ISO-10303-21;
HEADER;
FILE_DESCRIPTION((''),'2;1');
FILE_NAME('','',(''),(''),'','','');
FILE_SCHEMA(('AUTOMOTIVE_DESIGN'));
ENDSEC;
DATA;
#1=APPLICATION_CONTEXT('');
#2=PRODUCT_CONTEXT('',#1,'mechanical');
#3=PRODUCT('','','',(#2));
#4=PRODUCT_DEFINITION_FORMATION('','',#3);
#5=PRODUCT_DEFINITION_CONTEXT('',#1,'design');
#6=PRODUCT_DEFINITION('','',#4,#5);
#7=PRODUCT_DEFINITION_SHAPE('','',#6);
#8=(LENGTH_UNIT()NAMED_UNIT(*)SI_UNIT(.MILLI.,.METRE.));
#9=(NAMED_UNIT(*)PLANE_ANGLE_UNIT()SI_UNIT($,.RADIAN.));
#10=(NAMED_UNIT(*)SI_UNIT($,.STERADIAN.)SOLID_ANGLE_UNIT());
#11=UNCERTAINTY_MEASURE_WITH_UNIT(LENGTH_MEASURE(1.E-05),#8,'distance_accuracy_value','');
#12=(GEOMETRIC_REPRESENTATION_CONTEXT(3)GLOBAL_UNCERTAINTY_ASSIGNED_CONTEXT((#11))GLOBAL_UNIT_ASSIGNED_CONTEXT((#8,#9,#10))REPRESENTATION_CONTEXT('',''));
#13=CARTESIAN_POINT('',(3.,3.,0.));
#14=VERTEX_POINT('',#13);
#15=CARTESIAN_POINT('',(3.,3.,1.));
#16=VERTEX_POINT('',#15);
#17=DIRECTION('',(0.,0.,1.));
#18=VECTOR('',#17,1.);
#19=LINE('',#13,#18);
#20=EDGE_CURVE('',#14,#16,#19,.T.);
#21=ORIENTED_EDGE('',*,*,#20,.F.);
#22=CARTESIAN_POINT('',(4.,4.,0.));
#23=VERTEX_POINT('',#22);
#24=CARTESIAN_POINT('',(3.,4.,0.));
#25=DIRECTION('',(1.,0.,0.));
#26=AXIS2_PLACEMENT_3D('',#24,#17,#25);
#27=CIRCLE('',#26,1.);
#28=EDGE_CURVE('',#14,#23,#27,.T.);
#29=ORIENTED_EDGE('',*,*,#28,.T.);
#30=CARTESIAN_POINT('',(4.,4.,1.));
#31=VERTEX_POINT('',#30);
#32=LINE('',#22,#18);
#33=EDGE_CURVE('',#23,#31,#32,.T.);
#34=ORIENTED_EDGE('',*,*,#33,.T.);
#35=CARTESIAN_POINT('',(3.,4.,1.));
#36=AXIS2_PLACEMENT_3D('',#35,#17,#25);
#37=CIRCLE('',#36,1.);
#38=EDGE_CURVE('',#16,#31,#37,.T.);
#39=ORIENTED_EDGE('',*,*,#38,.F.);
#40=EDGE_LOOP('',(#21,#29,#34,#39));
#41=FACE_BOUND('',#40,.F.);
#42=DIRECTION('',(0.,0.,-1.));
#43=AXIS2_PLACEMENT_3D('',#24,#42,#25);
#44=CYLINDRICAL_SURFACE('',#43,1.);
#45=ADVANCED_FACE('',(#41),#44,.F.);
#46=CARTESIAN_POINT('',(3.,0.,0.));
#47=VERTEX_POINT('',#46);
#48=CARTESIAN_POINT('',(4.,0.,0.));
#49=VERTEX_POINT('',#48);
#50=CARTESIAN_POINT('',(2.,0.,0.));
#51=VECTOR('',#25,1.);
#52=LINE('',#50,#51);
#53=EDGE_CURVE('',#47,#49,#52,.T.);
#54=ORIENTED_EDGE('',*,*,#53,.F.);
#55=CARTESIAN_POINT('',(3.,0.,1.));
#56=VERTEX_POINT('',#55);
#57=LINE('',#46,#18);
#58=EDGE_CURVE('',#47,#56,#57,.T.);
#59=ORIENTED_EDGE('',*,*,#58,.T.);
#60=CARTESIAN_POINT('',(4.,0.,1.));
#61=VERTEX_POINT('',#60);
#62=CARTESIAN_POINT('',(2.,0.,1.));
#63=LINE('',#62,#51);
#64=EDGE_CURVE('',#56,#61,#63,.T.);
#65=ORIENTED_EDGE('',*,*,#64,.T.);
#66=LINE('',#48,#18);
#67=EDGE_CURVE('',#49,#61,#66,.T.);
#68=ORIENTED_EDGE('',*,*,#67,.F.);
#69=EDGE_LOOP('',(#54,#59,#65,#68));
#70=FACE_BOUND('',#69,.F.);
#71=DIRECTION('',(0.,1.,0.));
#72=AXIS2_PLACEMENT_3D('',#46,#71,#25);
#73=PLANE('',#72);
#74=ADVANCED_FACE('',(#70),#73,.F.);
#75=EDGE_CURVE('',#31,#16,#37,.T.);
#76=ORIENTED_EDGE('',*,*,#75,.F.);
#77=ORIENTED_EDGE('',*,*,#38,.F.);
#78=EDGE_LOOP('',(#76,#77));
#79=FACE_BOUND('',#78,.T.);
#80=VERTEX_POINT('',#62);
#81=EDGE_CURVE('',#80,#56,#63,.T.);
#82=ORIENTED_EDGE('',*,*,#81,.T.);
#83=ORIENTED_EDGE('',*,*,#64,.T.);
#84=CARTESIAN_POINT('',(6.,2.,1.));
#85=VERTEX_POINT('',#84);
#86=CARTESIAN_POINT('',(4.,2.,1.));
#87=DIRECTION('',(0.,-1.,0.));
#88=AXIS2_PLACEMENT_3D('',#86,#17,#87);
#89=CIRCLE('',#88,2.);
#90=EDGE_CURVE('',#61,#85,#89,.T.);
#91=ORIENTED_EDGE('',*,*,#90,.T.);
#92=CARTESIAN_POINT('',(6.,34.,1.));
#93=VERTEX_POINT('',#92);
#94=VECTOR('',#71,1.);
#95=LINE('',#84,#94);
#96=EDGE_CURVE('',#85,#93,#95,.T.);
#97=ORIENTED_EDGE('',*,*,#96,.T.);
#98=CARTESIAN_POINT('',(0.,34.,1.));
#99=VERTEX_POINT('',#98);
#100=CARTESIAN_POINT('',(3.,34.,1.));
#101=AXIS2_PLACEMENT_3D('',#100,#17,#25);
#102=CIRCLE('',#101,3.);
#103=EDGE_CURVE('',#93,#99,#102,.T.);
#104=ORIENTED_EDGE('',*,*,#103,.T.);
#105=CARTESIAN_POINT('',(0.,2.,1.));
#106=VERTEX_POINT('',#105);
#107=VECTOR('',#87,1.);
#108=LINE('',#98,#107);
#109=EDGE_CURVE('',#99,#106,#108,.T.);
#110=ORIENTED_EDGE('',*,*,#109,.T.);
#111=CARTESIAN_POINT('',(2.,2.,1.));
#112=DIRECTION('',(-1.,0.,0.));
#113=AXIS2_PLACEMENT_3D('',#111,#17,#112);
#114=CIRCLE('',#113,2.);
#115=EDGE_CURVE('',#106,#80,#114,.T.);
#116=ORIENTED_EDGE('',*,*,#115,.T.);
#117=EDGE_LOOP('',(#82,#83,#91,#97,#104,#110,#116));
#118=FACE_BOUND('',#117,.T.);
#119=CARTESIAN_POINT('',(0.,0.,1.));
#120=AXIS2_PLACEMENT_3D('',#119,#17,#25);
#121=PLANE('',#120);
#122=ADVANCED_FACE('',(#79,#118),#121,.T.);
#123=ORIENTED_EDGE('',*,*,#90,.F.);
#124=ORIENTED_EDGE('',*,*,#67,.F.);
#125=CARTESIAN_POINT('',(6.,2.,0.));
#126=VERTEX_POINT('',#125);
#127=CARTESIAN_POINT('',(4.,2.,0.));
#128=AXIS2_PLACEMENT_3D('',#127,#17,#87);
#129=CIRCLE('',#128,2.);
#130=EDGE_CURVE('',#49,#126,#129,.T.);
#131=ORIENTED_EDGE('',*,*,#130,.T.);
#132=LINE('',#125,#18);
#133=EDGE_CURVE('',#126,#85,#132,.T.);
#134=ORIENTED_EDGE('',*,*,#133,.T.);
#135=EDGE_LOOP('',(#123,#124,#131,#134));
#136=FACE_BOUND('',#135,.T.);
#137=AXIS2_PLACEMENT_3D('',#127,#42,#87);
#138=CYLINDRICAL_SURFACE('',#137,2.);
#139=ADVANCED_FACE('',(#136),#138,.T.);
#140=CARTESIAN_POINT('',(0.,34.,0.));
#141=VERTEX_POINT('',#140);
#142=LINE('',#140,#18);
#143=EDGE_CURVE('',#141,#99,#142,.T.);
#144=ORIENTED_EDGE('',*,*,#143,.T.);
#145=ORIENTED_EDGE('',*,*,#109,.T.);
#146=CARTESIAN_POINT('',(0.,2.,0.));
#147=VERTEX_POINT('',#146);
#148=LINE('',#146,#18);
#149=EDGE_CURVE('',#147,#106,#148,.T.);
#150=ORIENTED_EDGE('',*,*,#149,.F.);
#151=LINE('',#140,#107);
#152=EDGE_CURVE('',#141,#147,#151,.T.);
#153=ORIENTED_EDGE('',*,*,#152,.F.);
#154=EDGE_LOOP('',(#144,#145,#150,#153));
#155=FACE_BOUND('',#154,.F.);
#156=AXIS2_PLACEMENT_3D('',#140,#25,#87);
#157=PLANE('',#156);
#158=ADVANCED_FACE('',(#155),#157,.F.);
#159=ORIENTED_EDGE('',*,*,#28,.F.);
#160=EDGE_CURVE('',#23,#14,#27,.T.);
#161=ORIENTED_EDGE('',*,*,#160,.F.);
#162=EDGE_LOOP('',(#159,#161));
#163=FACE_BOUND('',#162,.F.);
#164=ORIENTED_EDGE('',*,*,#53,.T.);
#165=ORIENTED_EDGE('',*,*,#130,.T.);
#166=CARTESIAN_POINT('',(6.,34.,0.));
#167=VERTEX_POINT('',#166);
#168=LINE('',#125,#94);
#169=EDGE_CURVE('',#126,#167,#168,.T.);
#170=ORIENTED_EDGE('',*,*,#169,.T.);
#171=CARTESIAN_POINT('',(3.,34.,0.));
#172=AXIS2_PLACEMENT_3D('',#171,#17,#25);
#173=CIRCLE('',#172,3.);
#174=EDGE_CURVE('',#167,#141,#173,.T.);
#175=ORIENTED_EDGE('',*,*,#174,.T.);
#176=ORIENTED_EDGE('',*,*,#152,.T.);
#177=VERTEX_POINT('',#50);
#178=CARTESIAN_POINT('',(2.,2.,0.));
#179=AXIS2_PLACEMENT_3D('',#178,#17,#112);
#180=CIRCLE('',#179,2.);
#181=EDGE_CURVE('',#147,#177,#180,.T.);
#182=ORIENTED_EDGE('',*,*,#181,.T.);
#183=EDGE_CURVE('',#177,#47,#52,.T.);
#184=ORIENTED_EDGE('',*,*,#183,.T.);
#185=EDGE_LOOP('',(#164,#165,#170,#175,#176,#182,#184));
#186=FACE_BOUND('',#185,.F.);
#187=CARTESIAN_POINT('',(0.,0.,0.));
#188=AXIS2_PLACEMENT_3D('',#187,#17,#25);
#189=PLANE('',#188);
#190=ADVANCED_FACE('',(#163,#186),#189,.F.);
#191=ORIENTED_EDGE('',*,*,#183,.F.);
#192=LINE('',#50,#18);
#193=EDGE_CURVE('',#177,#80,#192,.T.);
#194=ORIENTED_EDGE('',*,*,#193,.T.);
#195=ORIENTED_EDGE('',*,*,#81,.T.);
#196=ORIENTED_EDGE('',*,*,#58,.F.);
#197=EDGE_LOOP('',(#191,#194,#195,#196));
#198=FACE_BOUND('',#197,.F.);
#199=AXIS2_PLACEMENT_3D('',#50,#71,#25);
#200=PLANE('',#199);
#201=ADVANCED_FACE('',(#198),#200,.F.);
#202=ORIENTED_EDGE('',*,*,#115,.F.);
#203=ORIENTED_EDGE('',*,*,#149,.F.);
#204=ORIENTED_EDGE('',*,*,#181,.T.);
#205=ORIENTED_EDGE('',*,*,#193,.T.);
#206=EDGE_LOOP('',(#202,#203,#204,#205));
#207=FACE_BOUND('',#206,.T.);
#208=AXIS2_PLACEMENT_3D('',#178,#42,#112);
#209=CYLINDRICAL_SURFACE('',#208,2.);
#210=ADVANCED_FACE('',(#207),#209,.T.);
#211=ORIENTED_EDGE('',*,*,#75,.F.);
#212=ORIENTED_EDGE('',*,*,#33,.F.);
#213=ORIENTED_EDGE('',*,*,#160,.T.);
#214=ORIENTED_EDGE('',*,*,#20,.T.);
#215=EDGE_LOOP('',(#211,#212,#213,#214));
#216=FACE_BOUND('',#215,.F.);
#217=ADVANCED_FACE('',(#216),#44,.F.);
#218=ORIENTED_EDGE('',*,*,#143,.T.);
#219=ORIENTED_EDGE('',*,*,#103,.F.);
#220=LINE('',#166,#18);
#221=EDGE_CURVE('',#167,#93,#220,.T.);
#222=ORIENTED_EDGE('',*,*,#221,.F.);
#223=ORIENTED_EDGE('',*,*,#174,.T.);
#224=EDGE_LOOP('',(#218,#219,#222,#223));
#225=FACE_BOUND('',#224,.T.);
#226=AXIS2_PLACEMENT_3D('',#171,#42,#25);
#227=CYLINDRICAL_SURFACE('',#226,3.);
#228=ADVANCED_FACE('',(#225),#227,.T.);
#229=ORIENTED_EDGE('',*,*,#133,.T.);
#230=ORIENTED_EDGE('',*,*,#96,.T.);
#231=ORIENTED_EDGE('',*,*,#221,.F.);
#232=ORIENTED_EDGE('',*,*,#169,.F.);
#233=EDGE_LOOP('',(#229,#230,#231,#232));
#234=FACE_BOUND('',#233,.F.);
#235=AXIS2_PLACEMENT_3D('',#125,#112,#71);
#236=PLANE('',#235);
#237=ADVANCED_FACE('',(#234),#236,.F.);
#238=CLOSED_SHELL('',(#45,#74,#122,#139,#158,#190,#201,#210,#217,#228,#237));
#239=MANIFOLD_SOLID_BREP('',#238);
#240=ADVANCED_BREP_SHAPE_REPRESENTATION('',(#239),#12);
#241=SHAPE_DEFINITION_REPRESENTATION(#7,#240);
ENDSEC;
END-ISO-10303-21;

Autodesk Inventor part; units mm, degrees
ref_plane "YZ Plane" through (0, 0, 0) normal (1, 0, 0) x (0, 1, 0)
ref_plane "XZ Plane" through (0, 0, 0) normal (0, 1, 0) x (-1, 0, 0)
ref_plane "XY Plane" through (0, 0, 0) normal (0, 0, 1) x (1, 0, 0)
sketch "Boceto1" plane through (0, 0, 0) normal (0, 0, 1) x (1, 0, 0)
  line L0 (2, 0) -> (4, 0)
  line L1 (6, 2) -> (6, 34)
  line L2 (3, 0) -> (3, 4)
  circle A0 centre (3, 4) radius 1
  arc A1 (6, 34) -> (0, 34) centre (3, 34) ccw
  line L3 (0, 34) -> (0, 2)
  arc A2 (0, 2) -> (2, 0) centre (2, 2) ccw
  arc A3 (4, 0) -> (6, 2) centre (4, 2) ccw
  point P0 (0, 0)
  point P1 (6, 0)
  dimension "d2" = 4
  dimension "d3" = 2
  dimension "d6" = 2
  dimension "d7" = 6
  dimension "d8" = 37
extrude "Extrusión1" add sketch "Boceto1" along normal blind 1
equation "\"thikness\" = 2"
equation "\"offset\" = 1"
equation "\"r1\" = 5.55"
equation "\"r2o\" = 59.75"
equation "\"delta_y\" = 6"
equation "\"wire_d\" = 1"
equation "\"width_ang_spring\" = 5"
equation "\"spring_int_diam\" = 8.5"
equation "\"spring_ext_diam\" = 10.5"
equation "\"r3\" = 8.25"
equation "\"r3R\" = 4.75"
equation "\"r3T\" = 6.74537"
equation "\"alpha\" = 54.847297deg"
equation "\"alpha2\" = 270deg"
equation "\"theta3_recogido\" = 305.152703deg"
equation "\"delta_theta_3\" = 45deg"
equation "\"joint_width\" = 12"
equation "\"joint_radius\" = 7.75"
equation "\"shaft_width\" = 15"
equation "\"shaft_joint_diameter\" = 7.75"
equation "\"separation_space\" = 0.5"
equation "\"height_finger\" = 42"
equation "\"cell_screw_head_diameter\" = 4"
equation "\"cell_screw_diameter\" = 2"
equation "\"cell_space\" = 2"
equation "\"cell_width\" = 6"
equation "\"cell_theta_position\" = 60deg"
equation "\"cell_thikness\" = 1"
equation "\"cell_lenght\" = 37"
equation "\"cell_z_space\" = 5"
equation "\"wire_D\" = 2.3"
equation "\"width_link\" = 8"
equation "\"Dt\" = 1.05949"
equation "\"Djoint_shaft\" = 2.3"
equation "\"shaft_x\" = 1.45"
equation "\"shaft_y\" = 6.45"
equation "\"lenght_body_link\" = 186.05"
equation "\"lenght_bar_support\" = 201.65"
equation "\"wire_spring_d\" = 1"
equation "\"spring_int_d\" = 6"
equation "\"spring_lenght\" = 28"
equation "\"trigger_offset\" = 2"
equation "\"m2_theta2o\" = 107deg"
equation "\"m2_r2\" = 28"
equation "\"e\" = 9"
equation "\"So\" = 17"
equation "\"m2_theta3o\" = -30deg"
equation "\"m2_r3\" = 19.75"
equation "\"m2_delta_theta1\" = 15deg"
equation "\"m2_theta3f\" = -60deg"
equation "\"trigger_thumb_lenght\" = 6"
equation "\"width_r12\" = 8"
equation "\"m2_r1\" = 25.2"
equation "\"r3_thikness\" = 3.5"
equation "\"t_thikness\" = 3"
equation "\"tg_width\" = 4"
equation "\"pivot_screw_d\" = 4"
equation "\"pivot_diameter\" = 7"
equation "\"sj_diam_shaft\" = 6"
equation "\"sj_groove\" = 2"
equation "\"sj_groove_deep\" = 7"
equation "\"sj_head_D\" = 7"
equation "\"sj_head_d\" = 4.7464"
equation "\"sj_head_height\" = 5"
equation "\"sf_lenght\" = 9.5"
equation "\"sf_base\" = 3"
equation "\"sf_head_height\" = 3"
equation "\"sf_head_width\" = 4.5"
equation "\"sf_head_offset\" = 0.25"
equation "\"sf_head_grip_width\" = 2"
equation "\"sf_head_angle\" = 45deg"
equation "\"sf_thikness\" = 5"
equation "\"screw_Dhead\" = 8"
equation "\"screw_d\" = 4"
equation "\"screw_lenght\" = 12"
equation "\"screwJ_base_D\" = 9"
equation "\"screwJ_top_D\" = 13"
equation "\"gj_D\" = 6"
equation "\"gj_d\" = 4"
equation "\"gj_out_section\" = 6"
equation "\"ext_width_slider\" = 3.5"
equation "\"sfbox_tip_width\" = 2.5"
equation "\"slim_width_slider\" = 1.5"
equation "\"agarradera_width\" = 4"
equation "\"int_width_slider\" = 2"
equation "\"agarradera_position\" = 82.13077"
equation "\"sfbox_theta1\" = 60deg"
equation "\"sfbox_theta2\" = 45deg"
equation "\"agarradera_theta\" = 60deg"
equation "\"sfbox_width\" = 1.5"
equation "\"box_fat_slider_lenght\" = 67"
equation "\"fat_width_slider\" = 2"
equation "\"box_in_width\" = 72"
equation "\"flex_separation_theta\" = 60deg"
equation "\"sf_flex_separation\" = 38.66667"
equation "\"thikness_box\" = 1.5"
equation "\"box_slim_slider_lenght\" = 116"
equation "\"box_in_deep\" = 77"
equation "\"box_in_height\" = 35"
properties part number "celda de carga"
